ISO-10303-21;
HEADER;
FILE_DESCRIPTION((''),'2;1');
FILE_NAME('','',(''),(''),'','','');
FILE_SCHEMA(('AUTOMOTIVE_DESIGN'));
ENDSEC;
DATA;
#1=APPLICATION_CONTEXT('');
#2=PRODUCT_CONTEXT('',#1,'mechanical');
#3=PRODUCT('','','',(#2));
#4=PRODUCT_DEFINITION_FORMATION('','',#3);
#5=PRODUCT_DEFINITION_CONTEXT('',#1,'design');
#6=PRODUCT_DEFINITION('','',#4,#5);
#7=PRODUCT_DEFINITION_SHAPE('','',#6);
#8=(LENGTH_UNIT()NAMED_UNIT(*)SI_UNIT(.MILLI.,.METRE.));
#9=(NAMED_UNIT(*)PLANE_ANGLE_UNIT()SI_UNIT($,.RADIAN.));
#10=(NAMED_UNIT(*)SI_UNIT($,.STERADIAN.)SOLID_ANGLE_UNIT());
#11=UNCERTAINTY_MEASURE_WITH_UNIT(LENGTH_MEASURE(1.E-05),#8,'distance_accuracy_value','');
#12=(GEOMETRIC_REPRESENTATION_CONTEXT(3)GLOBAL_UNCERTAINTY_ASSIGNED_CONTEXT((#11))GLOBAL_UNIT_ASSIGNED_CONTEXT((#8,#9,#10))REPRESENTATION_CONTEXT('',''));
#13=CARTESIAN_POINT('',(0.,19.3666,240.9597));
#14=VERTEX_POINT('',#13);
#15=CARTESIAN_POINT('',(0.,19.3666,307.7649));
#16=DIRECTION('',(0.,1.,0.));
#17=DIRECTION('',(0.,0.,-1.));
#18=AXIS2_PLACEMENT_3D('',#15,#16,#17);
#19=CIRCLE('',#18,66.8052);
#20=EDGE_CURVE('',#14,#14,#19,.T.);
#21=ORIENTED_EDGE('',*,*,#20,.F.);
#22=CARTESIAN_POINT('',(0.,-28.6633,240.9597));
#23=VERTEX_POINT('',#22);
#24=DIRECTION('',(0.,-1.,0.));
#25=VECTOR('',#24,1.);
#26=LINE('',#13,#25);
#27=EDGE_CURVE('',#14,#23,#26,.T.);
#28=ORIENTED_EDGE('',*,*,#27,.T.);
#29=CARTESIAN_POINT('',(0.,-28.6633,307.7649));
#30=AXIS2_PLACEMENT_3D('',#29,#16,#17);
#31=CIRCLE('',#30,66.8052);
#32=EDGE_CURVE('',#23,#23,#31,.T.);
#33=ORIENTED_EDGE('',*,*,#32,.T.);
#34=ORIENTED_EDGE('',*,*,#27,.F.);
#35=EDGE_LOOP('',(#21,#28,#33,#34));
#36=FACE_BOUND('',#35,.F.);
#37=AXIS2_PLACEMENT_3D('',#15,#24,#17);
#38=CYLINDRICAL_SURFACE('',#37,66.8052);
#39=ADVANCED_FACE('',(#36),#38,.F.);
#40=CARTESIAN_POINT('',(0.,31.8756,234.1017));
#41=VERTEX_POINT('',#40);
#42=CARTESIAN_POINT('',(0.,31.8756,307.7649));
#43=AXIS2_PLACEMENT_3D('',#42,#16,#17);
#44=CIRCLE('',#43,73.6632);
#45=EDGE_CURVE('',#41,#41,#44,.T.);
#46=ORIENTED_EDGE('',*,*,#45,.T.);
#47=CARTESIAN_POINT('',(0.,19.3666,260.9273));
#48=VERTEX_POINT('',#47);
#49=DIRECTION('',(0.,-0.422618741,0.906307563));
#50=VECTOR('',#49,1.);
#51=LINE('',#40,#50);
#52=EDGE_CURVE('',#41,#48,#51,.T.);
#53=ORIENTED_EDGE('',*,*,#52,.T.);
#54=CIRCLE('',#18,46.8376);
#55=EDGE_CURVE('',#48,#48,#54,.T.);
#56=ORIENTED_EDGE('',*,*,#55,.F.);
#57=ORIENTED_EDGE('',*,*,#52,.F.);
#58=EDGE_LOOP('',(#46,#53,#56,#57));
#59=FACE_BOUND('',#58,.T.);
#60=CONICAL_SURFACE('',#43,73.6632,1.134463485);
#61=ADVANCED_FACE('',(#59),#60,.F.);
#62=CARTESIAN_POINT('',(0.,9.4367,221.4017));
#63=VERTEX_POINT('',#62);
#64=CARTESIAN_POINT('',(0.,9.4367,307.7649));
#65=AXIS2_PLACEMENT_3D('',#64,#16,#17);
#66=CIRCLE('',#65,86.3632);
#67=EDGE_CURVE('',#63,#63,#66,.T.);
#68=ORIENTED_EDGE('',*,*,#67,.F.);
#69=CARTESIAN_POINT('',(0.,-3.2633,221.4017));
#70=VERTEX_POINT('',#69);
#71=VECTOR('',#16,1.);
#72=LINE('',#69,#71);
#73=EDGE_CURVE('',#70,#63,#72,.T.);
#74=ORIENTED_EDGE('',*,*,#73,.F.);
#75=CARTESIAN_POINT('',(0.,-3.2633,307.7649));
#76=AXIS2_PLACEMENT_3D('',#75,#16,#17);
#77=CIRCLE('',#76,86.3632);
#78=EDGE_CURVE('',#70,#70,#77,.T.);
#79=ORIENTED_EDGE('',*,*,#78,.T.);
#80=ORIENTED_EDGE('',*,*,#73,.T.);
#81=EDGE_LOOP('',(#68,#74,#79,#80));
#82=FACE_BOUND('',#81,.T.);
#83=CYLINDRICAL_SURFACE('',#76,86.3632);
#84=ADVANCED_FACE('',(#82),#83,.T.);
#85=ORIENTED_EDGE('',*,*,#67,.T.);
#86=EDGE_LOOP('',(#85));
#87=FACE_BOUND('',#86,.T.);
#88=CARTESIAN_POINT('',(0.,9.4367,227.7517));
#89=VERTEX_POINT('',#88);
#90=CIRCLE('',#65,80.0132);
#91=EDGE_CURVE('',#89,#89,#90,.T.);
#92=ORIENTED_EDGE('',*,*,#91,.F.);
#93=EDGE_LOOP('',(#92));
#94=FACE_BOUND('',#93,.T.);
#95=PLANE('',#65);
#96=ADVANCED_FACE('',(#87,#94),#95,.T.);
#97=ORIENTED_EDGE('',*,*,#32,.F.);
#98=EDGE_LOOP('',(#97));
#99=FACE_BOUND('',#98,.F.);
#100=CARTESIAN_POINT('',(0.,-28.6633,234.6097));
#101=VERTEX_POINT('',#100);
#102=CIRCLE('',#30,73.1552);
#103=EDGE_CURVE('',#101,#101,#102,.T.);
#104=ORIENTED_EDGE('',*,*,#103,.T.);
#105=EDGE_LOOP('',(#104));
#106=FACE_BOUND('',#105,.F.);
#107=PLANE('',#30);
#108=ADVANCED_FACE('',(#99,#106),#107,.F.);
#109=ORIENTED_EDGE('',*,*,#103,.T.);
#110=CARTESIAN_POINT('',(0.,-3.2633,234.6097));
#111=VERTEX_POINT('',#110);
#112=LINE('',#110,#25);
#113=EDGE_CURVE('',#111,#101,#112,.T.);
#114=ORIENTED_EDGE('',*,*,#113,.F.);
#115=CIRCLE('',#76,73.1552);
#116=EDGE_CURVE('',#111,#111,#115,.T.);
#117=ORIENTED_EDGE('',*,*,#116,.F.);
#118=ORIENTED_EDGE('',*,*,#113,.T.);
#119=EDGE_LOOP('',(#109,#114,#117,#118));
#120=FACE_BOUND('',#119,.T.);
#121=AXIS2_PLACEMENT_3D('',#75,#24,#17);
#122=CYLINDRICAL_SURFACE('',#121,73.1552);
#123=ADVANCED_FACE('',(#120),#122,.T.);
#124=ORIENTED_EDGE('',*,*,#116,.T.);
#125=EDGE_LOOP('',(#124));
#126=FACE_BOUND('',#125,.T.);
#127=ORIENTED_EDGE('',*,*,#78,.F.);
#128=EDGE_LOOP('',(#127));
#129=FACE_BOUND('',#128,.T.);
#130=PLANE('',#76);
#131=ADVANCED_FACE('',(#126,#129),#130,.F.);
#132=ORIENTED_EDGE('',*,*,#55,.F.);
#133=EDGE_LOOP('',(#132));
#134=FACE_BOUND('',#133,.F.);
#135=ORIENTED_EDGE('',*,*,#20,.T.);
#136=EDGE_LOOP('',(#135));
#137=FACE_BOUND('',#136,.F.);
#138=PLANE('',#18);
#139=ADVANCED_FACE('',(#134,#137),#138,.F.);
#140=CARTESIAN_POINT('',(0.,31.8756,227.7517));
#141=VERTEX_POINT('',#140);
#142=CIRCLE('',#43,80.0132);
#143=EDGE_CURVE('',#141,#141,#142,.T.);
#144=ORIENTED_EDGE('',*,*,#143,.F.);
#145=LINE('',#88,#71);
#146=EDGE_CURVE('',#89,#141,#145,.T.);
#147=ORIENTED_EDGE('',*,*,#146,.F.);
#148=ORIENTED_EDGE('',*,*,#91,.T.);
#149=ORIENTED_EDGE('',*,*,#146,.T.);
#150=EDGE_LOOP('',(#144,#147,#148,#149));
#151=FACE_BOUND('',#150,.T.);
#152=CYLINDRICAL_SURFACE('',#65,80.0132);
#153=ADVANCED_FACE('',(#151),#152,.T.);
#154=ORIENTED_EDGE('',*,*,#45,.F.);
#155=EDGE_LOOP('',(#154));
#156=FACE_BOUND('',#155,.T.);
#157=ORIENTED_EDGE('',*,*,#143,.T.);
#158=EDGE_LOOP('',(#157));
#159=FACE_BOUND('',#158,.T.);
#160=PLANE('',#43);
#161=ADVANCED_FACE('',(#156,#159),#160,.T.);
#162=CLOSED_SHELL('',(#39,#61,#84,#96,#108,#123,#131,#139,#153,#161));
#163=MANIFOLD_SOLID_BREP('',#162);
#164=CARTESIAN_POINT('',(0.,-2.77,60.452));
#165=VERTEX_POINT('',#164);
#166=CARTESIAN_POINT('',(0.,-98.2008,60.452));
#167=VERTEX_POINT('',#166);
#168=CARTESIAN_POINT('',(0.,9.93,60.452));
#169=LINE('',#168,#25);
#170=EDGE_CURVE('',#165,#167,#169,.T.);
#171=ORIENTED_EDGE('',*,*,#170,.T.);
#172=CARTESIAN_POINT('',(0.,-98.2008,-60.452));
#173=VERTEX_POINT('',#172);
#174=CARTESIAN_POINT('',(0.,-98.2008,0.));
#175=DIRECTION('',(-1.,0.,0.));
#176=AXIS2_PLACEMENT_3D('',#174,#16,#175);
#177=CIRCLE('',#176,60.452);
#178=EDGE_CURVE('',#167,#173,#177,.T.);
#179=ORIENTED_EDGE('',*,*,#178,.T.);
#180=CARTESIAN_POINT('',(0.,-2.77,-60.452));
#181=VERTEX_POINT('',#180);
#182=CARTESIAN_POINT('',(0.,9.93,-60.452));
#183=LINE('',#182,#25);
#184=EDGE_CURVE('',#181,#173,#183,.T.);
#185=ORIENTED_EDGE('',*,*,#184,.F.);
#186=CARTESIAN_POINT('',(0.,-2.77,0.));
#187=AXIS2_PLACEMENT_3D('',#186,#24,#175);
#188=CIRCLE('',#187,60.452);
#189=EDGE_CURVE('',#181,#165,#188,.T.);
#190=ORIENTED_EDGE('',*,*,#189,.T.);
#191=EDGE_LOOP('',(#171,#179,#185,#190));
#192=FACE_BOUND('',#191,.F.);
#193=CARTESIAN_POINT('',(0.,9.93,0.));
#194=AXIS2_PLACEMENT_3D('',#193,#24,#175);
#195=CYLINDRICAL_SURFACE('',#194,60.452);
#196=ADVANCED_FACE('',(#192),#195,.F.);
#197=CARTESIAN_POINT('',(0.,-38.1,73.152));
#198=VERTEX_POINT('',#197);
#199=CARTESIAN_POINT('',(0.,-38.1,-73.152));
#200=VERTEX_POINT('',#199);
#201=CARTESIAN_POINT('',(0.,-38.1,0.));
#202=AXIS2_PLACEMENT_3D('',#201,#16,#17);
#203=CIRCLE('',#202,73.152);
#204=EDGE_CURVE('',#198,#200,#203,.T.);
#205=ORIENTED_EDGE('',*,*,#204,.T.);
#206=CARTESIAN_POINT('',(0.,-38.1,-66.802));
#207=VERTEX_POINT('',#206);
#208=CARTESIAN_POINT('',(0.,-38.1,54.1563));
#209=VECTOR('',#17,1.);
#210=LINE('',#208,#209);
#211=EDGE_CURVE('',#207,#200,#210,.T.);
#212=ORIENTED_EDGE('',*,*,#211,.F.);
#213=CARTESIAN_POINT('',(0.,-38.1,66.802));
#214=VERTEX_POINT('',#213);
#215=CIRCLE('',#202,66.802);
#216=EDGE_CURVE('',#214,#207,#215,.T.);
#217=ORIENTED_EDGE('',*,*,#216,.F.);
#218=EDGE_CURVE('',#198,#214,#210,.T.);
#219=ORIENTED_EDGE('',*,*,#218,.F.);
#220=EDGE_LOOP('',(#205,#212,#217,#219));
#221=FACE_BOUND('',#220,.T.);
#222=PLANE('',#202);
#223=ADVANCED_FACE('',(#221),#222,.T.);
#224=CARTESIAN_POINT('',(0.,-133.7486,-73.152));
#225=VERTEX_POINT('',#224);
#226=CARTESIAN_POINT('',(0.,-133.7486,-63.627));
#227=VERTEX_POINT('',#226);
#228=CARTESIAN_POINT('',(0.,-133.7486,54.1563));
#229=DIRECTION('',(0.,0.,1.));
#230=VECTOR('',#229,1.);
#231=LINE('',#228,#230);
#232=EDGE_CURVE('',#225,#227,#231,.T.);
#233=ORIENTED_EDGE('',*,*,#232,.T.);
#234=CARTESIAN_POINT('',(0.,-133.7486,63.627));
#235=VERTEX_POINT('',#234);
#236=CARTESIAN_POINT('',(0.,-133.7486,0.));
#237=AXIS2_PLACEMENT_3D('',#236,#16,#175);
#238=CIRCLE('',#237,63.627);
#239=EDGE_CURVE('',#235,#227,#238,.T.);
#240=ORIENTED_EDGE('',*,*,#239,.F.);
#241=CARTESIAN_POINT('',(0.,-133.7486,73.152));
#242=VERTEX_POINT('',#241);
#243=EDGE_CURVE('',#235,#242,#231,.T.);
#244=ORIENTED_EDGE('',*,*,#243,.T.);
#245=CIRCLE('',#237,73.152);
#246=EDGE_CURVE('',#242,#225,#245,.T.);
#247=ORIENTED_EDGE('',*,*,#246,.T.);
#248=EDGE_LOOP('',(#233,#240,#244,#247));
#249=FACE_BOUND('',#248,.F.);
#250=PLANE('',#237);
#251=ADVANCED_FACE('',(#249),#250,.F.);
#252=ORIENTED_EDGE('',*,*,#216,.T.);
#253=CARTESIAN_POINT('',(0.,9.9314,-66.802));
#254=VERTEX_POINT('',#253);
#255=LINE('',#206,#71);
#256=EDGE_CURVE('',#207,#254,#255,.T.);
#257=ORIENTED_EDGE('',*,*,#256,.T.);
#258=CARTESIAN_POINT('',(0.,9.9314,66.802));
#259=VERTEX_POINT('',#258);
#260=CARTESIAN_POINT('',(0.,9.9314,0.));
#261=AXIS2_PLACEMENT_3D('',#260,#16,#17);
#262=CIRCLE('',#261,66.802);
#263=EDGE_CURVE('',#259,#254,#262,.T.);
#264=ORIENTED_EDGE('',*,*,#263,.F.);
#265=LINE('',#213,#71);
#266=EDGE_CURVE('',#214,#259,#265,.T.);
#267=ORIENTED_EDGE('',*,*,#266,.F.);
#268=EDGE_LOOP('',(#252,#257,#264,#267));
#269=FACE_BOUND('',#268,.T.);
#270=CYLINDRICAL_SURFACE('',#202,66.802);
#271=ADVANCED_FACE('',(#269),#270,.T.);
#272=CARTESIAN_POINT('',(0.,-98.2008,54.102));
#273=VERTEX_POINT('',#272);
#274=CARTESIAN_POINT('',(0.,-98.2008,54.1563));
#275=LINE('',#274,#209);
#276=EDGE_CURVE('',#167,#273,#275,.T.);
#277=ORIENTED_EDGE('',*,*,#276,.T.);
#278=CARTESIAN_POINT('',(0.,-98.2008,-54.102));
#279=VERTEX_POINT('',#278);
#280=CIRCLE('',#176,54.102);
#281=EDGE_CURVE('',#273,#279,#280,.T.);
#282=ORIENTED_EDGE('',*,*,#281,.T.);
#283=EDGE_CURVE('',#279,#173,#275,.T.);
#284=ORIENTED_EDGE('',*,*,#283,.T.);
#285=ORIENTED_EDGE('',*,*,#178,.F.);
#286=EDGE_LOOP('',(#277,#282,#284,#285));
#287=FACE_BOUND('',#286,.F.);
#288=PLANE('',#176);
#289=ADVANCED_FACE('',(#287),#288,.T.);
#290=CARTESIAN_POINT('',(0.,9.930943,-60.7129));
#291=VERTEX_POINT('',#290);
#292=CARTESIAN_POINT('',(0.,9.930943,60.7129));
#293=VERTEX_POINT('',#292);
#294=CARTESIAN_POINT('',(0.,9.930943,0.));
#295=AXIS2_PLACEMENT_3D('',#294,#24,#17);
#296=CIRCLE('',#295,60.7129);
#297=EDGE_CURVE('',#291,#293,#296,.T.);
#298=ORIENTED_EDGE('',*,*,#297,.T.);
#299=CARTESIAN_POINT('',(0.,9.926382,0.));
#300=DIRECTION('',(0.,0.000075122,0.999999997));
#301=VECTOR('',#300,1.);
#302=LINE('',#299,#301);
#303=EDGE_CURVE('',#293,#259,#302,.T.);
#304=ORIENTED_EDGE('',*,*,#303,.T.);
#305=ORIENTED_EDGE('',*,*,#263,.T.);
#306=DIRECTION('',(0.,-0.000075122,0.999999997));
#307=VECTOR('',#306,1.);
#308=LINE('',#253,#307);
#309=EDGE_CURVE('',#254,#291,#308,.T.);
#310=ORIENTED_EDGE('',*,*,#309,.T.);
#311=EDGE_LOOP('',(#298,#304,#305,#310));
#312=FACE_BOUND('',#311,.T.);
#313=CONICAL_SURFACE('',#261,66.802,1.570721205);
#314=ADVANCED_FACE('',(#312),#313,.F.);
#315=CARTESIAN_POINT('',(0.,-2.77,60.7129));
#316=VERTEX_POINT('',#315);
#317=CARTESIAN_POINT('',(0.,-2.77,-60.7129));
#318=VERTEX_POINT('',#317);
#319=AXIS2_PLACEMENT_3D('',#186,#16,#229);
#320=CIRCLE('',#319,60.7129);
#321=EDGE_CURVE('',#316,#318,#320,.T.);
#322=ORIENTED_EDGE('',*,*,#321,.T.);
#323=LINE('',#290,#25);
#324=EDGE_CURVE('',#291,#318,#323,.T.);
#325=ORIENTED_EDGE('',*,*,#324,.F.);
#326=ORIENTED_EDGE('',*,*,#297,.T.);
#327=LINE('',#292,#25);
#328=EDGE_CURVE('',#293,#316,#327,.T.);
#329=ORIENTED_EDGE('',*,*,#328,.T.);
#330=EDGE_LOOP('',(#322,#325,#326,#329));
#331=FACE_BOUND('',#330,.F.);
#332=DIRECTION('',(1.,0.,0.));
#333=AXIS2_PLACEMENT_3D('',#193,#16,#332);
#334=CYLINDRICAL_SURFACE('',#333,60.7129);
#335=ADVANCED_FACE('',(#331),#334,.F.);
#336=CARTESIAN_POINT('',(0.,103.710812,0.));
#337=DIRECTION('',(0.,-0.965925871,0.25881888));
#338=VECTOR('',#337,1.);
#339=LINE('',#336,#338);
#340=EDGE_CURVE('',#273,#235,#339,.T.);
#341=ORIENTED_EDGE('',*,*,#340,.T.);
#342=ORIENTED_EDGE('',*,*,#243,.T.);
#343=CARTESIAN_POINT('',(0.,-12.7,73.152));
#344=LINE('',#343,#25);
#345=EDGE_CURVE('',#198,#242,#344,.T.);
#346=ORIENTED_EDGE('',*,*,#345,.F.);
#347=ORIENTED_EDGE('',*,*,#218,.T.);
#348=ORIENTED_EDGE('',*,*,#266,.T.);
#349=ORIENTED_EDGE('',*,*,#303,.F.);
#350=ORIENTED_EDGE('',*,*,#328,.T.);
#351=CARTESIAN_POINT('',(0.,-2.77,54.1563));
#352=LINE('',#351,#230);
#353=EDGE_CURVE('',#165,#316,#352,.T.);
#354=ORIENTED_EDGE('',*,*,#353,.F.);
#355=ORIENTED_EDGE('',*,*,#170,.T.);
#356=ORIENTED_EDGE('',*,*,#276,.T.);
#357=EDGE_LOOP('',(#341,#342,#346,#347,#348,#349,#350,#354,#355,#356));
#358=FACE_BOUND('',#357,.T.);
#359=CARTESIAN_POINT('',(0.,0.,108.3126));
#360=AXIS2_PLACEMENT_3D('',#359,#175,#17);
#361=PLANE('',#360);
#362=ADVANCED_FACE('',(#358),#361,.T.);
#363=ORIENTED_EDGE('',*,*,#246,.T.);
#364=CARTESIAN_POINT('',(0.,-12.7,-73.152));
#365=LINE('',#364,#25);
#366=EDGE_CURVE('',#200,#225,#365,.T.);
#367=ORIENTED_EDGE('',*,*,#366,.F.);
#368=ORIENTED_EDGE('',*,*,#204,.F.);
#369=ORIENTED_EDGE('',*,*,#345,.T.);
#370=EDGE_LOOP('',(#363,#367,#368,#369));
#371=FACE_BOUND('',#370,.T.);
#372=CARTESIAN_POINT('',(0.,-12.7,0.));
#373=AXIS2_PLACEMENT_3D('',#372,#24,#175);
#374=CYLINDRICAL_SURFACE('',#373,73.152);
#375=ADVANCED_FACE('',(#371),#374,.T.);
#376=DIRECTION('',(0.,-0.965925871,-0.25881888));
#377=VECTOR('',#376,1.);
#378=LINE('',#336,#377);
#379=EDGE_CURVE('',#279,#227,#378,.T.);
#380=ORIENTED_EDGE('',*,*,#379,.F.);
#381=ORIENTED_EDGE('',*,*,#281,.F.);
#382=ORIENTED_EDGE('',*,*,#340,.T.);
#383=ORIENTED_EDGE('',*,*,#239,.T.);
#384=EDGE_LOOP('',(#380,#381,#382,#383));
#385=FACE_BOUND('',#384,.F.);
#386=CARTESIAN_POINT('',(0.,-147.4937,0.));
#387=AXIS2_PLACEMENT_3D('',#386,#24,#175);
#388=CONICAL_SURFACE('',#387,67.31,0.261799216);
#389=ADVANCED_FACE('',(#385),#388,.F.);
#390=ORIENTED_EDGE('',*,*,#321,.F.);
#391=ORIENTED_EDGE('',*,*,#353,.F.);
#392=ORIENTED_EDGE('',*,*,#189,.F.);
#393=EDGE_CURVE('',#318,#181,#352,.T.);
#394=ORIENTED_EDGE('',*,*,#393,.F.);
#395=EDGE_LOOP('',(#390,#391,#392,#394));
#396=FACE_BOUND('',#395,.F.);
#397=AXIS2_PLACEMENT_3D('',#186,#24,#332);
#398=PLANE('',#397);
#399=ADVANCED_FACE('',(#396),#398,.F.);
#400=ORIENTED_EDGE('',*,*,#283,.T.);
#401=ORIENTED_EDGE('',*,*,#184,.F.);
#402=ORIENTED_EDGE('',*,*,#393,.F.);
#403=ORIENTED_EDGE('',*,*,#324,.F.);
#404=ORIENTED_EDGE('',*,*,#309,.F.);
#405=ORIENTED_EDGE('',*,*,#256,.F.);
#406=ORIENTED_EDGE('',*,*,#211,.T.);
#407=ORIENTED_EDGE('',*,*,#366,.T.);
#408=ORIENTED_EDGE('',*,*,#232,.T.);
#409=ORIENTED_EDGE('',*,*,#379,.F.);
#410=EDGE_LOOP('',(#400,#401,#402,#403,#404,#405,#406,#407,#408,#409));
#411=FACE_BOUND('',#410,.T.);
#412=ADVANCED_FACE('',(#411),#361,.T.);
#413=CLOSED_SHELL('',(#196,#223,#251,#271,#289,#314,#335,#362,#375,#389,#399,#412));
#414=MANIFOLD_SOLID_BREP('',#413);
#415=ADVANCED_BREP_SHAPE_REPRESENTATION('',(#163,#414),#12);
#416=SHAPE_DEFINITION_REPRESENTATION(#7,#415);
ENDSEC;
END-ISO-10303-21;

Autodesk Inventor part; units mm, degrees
ref_plane "YZ Plane" through (0, 0, 0) normal (1, 0, 0) x (0, 1, 0)
ref_plane "XZ Plane" through (0, 0, 0) normal (0, 1, 0) x (-1, 0, 0)
ref_plane "XY Plane" through (0, 0, 0) normal (0, 0, 1) x (1, 0, 0)
sketch "Sketch1" plane through (0, 0, 0) normal (0, 0, 1) x (1, 0, 0)
  line L0 (0, 25.4) -> (-28.702, 25.4) construction
  line L1 (0, 25.4) -> (-86.36, 25.4) construction
  line L2 (-86.36, 25.4) -> (-80.01, 25.4) construction
  line L3 (-80.01, 25.4) -> (-73.66, 22.4389) construction
  line L4 (-80.01, 25.4) -> (-80.01, 22.4389) construction
  line L5 (-80.01, 0) -> (-86.36, 0)
  line L6 (-28.702, 59.6457) -> (-28.702, -91.9304) construction
  arc A0 (-28.9184, -4.2142) -> (-32.3684, 3.1843) centre (-35.052, -2.5707) ccw
  line L7 (-67.31, -147.4937) -> (-28.9184, -4.2142)
  line L8 (-80.01, 22.4389) -> (-73.66, 22.4389)
  line L9 (-80.01, 22.4389) -> (-80.01, 0)
  line L10 (-73.66, 22.4389) -> (-32.3684, 3.1843)
  line L11 (-28.702, -2.5707) -> (-60.452, -2.5707) construction
  line L12 (-60.452, 16.28) -> (-60.452, -121.8993) construction
  line L13 (-60.452, -121.8993) -> (-54.102, -121.8993) construction
  line L14 (-54.102, -121.8993) -> (-54.102, -98.2008) construction
  line L15 (-54.102, -98.2008) -> (-60.452, -98.2008)
  line L16 (-60.452, 16.28) -> (-60.452, 6.755) construction
  line L17 (-60.452, 16.28) -> (-60.452, 9.93) construction
  line L18 (-60.452, 9.93) -> (-46.8344, 9.93)
  line L19 (-60.452, 9.93) -> (-60.452, -98.2008)
  line L20 (-86.36, 0) -> (-86.36, -12.7) construction
  line L21 (-60.452, -12.7) -> (-73.152, -12.7) construction
  line L22 (-86.36, -12.7) -> (-86.36, -25.4) construction
  line L23 (-86.36, -25.4) -> (-86.36, -88.9) construction
  line L24 (-86.36, -88.9) -> (-73.66, -88.9) construction
  line L25 (-73.66, -88.9) -> (-73.66, -25.4) construction
  line L26 (-86.36, -25.4) -> (-73.66, -25.4)
  line L27 (-73.66, -25.4) -> (-73.66, -88.9)
  line L28 (-73.66, -88.9) -> (-86.36, -88.9)
  line L29 (-86.36, -12.7) -> (-73.152, -12.7)
  line L30 (-73.152, -133.7486) -> (-63.627, -133.7486)
  line L31 (-73.66, -88.9) -> (-73.66, -147.4937)
  line L32 (-73.66, -147.4937) -> (-67.31, -147.4937)
  line L33 (-73.152, -12.7) -> (-73.152, -133.7486)
  line L34 (-80.01, -25.4) -> (-80.01, -31.3436)
  line L35 (-80.01, -31.3436) -> (-86.36, -31.3436)
  line L36 (-86.36, 0) -> (-86.36, -25.4)
  line L37 (-86.36, -31.3436) -> (-86.36, -88.9)
  line L38 (0, -319.0244) -> (0, 122.7573) projected
  point P0 (0, 0)
  point P1 (-86.36, -255.9127)
  point P2 (-76.835, 22.4389)
  dimension "d0" = 28.702
  dimension "d1" = 86.36
  dimension "d2" = 6.35
  dimension "d3" = 25
  dimension "d5" = 25.4
  dimension "d6" = 25.4
  dimension "d8" = 12.7
  dimension "d11" = 6.35
  dimension "d12" = 31.75
  dimension "d13" = 6.35
  dimension "d15" = 6.35
  dimension "d16" = 12.7
  dimension "d17" = 12.7
  dimension "d18" = 12.7
  dimension "d19" = 63.5
  dimension "d20" = 12.7
  dimension "d22" = 9.525
  dimension "d23" = 6.35
  dimension "d25" = 5.9436
  dimension "d26" = 15
revolve "Revolution2" add sketch "Sketch1" angle 360 about axis through (0, -10, 0) along (0, 1, 0) contours L9 L8 L10 L18 L19 L15 L7 L30 L33 L29 L36 L5
sketch "Sketch2" plane through (0, 0, 0) normal (0, 1, 0) x (-1, 0, 0)
  line L0 (0, -114.5678) -> (107.9834, -114.5678)
  line L1 (107.9834, -114.5678) -> (107.9834, 108.3126)
  line L2 (107.9834, 108.3126) -> (0, 108.3126)
  line L3 (0, 108.3126) -> (0, -114.5678)
  point P0 (0, 0)
extrude "Extrusion1" cut sketch "Sketch2" along normal through all both and the other way through all
sketch "Sketch3" plane through (0, -133.7486, -73.152) normal (-1, 0, 0) x (0, 0, 1)
  line L0 (6.35, 143.6785) -> (6.35, 121.0486)
  line L1 (6.35, 121.0486) -> (6.35, 95.6486)
  line L2 (0, 95.6486) -> (6.35, 95.6486)
  line L3 (0, 121.0486) -> (-13.208, 121.0486)
  line L4 (-13.208, 121.0486) -> (-13.208, 133.7486) projected
  line L5 (-13.208, 121.0486) -> (-13.208, 133.7486)
  line L6 (-13.208, 133.7486) -> (-6.858, 133.7486)
  line L7 (-6.858, 133.7486) -> (-6.858, 156.1875)
  line L8 (-0.508, 156.1875) -> (26.3176, 143.6785) projected
  line L9 (-6.858, 156.1875) -> (-0.508, 156.1875)
  line L10 (-0.508, 156.1875) -> (26.3176, 143.6785)
  line L11 (12.7, 143.6785) -> (26.3176, 143.6785)
  line L12 (6.35, 143.6785) -> (12.7, 143.6785)
  line L13 (314.1117, 153.1152) -> (314.1117, 130.4853)
  line L14 (314.1117, 130.4853) -> (314.1117, 105.0853)
  line L15 (307.7617, 105.0853) -> (314.1117, 105.0853)
  line L16 (307.7617, 130.4853) -> (294.5537, 130.4853)
  line L17 (294.5537, 130.4853) -> (294.5537, 143.1853)
  line L18 (294.5537, 143.1853) -> (300.9037, 143.1853)
  line L19 (300.9037, 143.1853) -> (300.9037, 165.6242)
  line L20 (307.2537, 165.6242) -> (334.0793, 153.1152)
  line L21 (300.9037, 165.6242) -> (307.2537, 165.6242)
  line L22 (320.4617, 153.1152) -> (334.0793, 153.1152)
  line L23 (314.1117, 153.1152) -> (320.4617, 153.1152)
  line L24 (334.0793, 153.1152) -> (380.9169, 153.1152) construction
  line L25 (380.9169, 153.1152) -> (380.9169, 203.9215) construction
  line L26 (307.7617, 130.4853) -> (307.7617, 105.0853)
  line L27 (0, 121.0486) -> (0, 95.6486)
  line L28 (0, 0) -> (0, 121.0486) projected
  point P0 (73.152, 133.7486)
  dimension "d32" = 6.35
  dimension "d34" = 6.35
  dimension "d35" = 46.8376
revolve "Revolution3" add sketch "Sketch3" angle 360 about axis through (0, 19.3666, 307.7649) along (0, 1, 0) contours L13 L14 L15 L26 L16 L17 L18 L19 L21 L20 L22 L23
sketch "Sketch6" plane through (0, -133.7486, -73.152) normal (-1, 0, 0) x (0, 0, 1)
  line L0 (0, 121.0486) -> (0, 95.6486)
  line L1 (0, 95.6486) -> (6.35, 95.6486)
  line L2 (0, 121.0486) -> (-13.208, 121.0486)
  line L3 (-13.208, 121.0486) -> (-13.208, 133.7486) projected
  line L4 (-13.208, 121.0486) -> (-13.208, 133.7486)
  line L5 (-13.208, 133.7486) -> (-6.858, 133.7486)
  line L6 (-6.858, 133.7486) -> (-6.858, 156.1875)
  line L7 (-0.508, 156.1875) -> (26.3176, 143.6785) projected
  line L8 (-6.858, 156.1875) -> (-0.508, 156.1875)
  line L9 (-0.508, 156.1875) -> (26.3176, 143.6785)
  line L10 (6.35, 95.6486) -> (6.35, 143.68)
  line L11 (6.35, 143.68) -> (26.3176, 143.6785)
  line L12 (26.3176, 143.6785) -> (92.5608, 143.6785) construction
  line L13 (73.152, 133.7486) -> (73.152, 183.9478) construction
  line L14 (119.9864, 143.6785) -> (26.3176, 143.6785) construction
  line L15 (26.3176, 143.6785) -> (73.152, 143.6785) construction
  dimension "d37" = 25.4
  dimension "d38" = 6.35
  dimension "d39" = 6.35
  dimension "d40" = 48.0314
revolve "Revolution4" cut sketch "Sketch6" angle 360 about axis through (0, 0, 0) along (0, 1, 0)
sketch "Sketch7" plane through (0, 9.93, 0) normal (0, -1, 0) x (1, 0, 0)
  point P0 (0, 0)
sketch "Sketch8" plane through (0, 9.93, 0) normal (0, -1, 0) x (1, 0, 0)
  point P0 (0, 0)
sketch "Sketch9" plane through (0, 9.93, 0) normal (0, -1, 0) x (1, 0, 0)
  circle A0 centre (0, 0) radius 60.7129
extrude "Extrusion2" cut sketch "Sketch9" along normal mid plane 25.4
properties part number "2 part phenolic sketch" material "Phenolic Resin"
